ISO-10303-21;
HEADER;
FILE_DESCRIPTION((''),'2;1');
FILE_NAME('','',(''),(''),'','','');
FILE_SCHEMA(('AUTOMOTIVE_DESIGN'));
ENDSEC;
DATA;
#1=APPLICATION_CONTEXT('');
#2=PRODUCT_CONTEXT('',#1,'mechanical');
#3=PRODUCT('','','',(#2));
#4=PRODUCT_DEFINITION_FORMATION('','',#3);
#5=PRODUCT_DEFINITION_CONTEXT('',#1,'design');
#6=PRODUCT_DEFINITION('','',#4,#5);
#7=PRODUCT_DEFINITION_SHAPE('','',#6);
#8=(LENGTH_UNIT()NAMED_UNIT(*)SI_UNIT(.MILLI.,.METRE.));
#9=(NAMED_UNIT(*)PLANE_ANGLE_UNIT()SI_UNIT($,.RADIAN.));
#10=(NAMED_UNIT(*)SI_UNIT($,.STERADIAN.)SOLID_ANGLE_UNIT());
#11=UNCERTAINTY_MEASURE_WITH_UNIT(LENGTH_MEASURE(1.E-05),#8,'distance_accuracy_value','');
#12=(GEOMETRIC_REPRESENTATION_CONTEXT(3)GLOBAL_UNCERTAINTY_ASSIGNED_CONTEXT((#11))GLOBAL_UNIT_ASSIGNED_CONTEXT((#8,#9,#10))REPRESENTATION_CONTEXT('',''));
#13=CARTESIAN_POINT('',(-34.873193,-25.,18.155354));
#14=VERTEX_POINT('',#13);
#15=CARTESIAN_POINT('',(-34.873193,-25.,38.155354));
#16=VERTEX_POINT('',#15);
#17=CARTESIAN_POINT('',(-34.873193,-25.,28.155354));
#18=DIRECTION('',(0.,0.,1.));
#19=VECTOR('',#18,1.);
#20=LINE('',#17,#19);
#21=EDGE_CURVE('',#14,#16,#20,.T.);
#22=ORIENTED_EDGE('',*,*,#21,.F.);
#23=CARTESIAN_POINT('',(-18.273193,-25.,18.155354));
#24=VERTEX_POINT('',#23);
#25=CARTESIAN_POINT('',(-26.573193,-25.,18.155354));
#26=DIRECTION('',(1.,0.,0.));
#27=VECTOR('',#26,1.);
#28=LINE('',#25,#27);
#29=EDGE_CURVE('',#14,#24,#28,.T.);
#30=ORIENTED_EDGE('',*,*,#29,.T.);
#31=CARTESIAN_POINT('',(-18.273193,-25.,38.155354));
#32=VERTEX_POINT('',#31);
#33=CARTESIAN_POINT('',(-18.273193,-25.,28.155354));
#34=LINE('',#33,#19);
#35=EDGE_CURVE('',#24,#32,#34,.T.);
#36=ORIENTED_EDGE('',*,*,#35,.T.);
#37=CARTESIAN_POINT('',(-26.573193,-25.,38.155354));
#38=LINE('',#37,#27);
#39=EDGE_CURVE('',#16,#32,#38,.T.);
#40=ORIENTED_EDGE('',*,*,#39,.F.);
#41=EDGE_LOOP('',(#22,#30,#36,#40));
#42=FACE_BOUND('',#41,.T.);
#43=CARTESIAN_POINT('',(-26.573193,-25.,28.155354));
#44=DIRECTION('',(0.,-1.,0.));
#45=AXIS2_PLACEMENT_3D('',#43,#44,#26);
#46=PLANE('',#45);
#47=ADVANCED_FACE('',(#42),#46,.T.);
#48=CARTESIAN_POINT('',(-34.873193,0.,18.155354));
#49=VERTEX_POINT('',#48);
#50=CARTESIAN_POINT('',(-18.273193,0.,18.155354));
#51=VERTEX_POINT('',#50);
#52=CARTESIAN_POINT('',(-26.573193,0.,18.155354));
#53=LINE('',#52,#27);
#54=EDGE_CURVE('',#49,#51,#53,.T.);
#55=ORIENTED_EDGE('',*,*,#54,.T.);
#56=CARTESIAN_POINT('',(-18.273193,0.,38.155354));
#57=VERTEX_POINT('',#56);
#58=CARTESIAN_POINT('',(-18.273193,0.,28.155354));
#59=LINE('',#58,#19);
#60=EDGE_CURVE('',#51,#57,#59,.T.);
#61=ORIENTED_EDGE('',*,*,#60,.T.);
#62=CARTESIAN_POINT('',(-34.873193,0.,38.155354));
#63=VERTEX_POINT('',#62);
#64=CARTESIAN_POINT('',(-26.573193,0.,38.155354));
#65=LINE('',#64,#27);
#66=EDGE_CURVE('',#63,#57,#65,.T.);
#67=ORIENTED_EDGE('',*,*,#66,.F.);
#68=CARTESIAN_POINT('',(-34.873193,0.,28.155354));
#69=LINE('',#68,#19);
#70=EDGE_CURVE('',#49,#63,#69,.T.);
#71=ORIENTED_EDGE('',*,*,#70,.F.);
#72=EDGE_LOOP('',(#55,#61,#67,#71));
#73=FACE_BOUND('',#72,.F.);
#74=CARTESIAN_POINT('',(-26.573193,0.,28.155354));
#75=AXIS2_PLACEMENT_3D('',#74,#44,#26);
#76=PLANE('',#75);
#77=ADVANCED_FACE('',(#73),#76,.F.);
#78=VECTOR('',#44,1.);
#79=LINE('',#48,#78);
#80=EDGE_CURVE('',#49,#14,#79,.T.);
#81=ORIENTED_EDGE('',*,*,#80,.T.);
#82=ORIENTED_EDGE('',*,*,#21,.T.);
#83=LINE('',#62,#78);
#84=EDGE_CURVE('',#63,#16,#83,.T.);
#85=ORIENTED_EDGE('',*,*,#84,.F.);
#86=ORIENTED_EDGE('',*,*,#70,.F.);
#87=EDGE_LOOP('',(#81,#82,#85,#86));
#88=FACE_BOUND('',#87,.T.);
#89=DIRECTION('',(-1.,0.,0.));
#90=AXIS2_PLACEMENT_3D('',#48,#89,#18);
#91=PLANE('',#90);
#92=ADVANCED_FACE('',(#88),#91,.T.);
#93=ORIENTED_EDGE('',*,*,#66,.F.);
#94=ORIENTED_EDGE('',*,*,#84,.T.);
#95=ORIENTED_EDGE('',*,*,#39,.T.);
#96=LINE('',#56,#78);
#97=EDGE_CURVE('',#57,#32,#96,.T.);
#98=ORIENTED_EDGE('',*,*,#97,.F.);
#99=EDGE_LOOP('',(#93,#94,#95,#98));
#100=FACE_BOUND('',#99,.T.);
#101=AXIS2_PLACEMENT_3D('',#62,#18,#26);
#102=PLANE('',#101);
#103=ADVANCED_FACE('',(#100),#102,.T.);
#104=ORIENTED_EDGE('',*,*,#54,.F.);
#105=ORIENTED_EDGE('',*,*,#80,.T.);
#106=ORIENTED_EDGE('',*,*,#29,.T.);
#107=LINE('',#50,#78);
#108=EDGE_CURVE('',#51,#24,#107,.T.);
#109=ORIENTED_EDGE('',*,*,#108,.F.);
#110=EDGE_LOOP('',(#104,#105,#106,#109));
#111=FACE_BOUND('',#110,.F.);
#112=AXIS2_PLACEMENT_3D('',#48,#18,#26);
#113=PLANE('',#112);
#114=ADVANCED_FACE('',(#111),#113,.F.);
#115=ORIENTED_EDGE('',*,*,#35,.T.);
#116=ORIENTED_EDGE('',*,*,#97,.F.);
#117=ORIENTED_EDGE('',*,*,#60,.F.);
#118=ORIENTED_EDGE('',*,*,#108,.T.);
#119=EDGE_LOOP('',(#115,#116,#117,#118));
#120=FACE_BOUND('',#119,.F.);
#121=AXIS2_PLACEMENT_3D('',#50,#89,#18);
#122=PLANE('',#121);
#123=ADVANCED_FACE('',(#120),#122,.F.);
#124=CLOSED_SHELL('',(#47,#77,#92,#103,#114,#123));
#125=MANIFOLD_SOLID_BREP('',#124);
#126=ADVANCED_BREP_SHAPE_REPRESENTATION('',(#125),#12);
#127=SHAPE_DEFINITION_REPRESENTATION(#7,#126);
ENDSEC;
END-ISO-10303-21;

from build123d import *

# Parameters (mm, degrees)
F0_W     = 16.6
F0_H     = 20
F2_DEPTH = 25


# Not quite as in the source:
# - a feature of the source that left no trace in its solid (it failed there, or was rolled back) is left out


with BuildPart() as f2:
    # F0 (on Front) → F2 (new body)
    with BuildSketch(Plane.XZ):
        with Locations((-26.5731932595, 28.1553536495)):
            Rectangle(F0_W, F0_H)
    extrude(amount=F2_DEPTH)


solid = f2.part
